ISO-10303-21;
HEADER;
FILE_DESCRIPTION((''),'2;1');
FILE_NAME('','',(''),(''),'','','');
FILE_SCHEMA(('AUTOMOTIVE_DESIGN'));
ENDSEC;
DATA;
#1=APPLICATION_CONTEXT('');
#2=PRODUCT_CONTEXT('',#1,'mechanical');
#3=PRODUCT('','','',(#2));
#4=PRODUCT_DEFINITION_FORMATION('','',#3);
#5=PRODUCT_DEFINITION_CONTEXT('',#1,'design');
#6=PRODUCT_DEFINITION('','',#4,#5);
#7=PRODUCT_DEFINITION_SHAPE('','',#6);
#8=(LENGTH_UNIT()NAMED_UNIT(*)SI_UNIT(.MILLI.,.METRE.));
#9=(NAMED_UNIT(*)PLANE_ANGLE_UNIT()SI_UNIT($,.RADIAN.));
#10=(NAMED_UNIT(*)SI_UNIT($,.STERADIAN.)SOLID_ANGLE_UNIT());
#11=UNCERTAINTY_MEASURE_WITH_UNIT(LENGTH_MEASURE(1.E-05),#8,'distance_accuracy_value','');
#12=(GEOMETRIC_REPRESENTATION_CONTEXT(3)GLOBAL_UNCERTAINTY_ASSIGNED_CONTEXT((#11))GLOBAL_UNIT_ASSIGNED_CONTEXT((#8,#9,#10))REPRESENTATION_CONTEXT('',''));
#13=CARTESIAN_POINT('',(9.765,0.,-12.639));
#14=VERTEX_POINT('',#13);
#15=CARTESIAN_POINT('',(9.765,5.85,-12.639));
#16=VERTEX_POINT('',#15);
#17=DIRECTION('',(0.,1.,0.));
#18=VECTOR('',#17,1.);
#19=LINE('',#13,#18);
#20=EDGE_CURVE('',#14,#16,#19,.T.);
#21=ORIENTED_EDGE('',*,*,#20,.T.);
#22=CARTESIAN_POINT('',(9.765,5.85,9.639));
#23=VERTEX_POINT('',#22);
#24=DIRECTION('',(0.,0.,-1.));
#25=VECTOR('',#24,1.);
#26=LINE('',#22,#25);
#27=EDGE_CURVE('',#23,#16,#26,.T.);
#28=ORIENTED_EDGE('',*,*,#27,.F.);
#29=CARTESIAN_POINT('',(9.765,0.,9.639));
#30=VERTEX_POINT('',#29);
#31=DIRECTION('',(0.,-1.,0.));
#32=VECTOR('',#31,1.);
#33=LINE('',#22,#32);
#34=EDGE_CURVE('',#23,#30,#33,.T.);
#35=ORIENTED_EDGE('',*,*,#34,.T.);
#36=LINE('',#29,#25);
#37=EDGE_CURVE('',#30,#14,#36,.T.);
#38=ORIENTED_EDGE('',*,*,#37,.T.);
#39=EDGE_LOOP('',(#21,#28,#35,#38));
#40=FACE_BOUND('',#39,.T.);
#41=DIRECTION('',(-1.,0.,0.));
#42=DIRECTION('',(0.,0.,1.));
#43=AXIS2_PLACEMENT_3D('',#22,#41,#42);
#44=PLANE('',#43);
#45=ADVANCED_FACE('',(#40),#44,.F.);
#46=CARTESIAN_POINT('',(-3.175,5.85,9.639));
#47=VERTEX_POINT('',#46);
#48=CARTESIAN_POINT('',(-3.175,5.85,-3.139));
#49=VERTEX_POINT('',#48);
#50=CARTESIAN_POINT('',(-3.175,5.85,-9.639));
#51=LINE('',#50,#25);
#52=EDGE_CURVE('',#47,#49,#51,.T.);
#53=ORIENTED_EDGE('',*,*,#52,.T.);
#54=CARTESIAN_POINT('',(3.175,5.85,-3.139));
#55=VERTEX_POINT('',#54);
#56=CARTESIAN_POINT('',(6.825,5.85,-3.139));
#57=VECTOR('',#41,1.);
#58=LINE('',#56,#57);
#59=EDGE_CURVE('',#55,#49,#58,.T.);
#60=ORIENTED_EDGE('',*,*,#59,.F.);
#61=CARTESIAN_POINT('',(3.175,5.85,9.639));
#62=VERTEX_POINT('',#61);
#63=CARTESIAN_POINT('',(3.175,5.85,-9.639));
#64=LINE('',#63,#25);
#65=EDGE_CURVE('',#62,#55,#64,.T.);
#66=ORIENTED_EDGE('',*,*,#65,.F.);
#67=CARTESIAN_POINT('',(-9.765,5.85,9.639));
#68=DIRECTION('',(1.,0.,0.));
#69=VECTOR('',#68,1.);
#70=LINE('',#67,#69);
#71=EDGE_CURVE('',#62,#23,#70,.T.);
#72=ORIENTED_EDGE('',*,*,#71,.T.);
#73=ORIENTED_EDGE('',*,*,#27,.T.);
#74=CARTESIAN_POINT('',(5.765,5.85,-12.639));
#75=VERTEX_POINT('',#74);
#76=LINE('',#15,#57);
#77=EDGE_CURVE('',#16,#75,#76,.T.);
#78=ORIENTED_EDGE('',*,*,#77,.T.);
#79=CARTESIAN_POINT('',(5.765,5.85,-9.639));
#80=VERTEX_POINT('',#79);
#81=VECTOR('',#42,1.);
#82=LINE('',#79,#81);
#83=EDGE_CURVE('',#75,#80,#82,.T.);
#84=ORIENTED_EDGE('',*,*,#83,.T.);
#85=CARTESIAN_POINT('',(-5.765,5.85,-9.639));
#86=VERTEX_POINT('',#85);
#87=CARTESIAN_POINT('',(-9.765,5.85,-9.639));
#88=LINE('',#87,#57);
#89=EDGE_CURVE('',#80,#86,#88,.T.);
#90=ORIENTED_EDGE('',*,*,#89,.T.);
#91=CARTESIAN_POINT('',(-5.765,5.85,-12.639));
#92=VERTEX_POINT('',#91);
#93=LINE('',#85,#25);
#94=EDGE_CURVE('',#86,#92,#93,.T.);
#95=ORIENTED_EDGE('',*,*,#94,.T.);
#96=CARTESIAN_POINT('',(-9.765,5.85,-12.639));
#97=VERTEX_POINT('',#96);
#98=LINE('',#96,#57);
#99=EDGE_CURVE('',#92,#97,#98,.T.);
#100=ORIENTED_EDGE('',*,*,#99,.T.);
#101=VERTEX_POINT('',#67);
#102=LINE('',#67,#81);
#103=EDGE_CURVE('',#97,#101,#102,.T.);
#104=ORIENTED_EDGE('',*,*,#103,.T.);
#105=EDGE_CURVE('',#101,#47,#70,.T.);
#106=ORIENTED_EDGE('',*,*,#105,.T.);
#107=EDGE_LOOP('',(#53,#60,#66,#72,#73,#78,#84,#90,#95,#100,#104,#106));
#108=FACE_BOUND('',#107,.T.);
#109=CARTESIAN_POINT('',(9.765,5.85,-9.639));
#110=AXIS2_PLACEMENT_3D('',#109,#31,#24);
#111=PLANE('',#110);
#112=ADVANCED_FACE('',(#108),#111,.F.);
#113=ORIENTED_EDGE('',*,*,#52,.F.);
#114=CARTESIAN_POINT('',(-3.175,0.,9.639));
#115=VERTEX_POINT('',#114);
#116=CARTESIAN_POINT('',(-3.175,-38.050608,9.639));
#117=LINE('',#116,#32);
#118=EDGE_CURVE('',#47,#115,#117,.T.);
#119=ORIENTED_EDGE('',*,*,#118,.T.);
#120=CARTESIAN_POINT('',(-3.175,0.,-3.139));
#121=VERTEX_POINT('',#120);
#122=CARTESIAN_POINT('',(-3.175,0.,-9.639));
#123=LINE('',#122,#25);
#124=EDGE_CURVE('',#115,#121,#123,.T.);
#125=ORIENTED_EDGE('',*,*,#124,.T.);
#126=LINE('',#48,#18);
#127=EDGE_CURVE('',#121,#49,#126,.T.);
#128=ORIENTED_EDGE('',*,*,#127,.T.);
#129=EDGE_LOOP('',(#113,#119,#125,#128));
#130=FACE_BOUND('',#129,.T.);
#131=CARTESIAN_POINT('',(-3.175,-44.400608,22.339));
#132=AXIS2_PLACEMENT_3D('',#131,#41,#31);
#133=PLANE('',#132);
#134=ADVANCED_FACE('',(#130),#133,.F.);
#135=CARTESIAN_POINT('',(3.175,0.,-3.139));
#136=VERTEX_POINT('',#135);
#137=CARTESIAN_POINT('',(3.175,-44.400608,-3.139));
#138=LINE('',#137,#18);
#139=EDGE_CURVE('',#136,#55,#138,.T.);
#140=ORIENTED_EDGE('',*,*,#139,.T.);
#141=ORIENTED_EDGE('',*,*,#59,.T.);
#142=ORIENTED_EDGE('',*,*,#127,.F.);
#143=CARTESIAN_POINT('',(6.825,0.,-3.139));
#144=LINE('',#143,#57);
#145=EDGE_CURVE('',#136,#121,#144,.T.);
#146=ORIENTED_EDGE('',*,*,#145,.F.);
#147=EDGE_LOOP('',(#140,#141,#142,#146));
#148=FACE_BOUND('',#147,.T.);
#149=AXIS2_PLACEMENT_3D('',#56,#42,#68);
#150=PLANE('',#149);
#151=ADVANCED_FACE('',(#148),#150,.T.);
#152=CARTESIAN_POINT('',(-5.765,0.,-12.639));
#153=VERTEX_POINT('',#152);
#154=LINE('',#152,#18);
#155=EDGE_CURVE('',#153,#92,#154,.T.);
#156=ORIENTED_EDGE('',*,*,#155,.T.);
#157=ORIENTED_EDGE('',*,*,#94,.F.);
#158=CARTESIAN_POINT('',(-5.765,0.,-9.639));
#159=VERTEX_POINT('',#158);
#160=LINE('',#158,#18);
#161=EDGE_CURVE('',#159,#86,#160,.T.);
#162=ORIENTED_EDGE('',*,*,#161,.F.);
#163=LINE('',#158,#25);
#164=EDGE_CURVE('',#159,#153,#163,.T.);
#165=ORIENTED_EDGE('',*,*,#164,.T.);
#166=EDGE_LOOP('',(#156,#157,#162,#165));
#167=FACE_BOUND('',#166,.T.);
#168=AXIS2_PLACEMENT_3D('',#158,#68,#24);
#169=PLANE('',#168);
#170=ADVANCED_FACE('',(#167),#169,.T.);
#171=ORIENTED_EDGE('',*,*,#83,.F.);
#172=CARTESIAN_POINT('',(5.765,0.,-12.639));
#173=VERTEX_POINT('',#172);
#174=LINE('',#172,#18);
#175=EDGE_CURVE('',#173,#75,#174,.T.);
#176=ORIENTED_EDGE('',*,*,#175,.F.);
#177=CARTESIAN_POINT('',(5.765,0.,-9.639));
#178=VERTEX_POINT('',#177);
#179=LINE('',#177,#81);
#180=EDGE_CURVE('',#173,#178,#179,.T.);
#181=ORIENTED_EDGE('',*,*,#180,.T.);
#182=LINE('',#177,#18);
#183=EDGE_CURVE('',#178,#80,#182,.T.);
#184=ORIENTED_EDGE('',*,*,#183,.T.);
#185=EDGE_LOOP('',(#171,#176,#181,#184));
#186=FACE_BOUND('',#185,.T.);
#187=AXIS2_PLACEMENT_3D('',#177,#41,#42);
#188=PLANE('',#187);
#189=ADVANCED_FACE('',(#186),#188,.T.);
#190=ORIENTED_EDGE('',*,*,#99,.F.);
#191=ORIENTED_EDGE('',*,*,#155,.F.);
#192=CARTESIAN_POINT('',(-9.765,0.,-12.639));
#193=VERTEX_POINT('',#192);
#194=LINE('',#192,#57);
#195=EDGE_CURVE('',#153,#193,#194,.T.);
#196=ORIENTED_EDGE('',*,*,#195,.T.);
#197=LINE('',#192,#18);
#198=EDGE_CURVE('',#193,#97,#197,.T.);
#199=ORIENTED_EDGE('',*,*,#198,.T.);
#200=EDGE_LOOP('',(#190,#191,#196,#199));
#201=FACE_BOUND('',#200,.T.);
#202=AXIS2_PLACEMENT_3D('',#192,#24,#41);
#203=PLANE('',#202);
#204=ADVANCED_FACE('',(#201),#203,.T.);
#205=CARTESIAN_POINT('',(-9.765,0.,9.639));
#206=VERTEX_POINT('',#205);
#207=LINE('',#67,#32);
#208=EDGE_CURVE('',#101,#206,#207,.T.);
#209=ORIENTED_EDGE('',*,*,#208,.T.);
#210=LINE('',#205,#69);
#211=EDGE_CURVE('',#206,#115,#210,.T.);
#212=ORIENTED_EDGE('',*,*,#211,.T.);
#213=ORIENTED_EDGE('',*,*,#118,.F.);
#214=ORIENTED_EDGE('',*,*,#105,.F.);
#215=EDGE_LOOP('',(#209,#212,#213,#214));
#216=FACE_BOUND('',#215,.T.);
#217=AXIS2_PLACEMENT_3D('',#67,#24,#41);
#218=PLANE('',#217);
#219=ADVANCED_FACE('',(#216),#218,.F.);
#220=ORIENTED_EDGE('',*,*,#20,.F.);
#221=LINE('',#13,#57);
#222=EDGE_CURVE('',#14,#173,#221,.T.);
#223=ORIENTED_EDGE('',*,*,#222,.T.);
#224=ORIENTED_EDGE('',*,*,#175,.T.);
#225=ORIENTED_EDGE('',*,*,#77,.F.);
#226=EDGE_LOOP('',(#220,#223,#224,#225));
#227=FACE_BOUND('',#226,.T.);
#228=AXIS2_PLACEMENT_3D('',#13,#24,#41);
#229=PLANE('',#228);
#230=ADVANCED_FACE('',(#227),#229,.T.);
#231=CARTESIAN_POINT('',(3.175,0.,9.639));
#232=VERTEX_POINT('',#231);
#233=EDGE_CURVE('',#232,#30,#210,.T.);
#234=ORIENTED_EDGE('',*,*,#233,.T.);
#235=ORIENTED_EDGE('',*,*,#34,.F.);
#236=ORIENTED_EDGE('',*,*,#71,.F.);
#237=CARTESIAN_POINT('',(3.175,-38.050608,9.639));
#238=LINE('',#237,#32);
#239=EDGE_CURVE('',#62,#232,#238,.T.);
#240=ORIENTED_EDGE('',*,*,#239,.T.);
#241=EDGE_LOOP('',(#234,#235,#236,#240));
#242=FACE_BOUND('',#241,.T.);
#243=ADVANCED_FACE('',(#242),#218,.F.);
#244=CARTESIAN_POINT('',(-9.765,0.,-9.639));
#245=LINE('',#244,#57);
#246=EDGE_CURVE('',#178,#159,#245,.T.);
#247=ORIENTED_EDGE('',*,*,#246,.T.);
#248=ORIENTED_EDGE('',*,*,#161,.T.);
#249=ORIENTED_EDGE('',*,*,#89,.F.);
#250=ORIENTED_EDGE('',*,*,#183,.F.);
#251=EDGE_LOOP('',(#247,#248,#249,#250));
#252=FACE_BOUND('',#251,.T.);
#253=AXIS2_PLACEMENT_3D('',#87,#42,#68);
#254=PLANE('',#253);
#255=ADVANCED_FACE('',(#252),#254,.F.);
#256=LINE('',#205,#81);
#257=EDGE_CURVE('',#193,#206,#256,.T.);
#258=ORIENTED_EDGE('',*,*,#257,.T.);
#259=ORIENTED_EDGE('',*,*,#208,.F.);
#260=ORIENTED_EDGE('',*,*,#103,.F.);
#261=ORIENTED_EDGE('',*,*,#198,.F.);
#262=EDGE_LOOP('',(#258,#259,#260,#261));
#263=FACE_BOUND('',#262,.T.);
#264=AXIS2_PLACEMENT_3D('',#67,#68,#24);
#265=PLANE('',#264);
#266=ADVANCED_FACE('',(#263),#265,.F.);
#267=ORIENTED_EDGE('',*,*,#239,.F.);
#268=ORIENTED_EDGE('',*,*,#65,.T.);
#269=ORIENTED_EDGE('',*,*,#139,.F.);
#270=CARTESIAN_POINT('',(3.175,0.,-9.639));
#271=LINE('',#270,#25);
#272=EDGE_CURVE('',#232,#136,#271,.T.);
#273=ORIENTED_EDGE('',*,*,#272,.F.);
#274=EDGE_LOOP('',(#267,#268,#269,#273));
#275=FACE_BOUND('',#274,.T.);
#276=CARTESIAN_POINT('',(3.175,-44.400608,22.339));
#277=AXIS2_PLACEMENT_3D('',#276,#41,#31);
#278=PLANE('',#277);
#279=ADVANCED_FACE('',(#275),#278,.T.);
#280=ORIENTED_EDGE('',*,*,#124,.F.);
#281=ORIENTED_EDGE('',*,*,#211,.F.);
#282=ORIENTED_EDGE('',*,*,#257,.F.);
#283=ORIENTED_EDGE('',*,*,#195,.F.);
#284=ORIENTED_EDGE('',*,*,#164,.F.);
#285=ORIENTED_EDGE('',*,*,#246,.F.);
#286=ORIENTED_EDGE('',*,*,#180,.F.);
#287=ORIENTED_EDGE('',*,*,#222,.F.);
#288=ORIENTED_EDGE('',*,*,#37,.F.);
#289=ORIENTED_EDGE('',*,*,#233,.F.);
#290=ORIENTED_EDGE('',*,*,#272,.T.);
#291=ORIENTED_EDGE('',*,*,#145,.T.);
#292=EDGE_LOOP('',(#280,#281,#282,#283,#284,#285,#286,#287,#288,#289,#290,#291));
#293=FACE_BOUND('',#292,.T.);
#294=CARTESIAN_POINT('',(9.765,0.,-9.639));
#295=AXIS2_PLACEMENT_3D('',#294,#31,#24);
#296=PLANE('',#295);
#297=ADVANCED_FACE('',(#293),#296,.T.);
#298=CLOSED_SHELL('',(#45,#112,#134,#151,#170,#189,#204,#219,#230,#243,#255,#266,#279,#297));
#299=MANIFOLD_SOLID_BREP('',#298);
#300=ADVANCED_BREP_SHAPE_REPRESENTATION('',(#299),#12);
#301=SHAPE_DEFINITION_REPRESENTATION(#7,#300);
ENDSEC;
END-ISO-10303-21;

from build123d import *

# Parameters (mm, degrees)
SKETCH1_W           = 19.53
SKETCH1_H           = 19.278
BOSS_EXTRUDE1_DEPTH = 5.85
SKETCH2_W           = 4
SKETCH2_H           = 3
BOSS_EXTRUDE2_DEPTH = 5.85
CAVITY1_START       = -3.175
CAVITY1_OUTLINE_W   = 5.85
CAVITY1_OUTLINE_H   = 12.778
CAVITY1_DEPTH       = 6.35


# Read off the part's stored shape, not the designer's step: Cavity1
with BuildPart() as part:
    # Sketch1 → Boss-Extrude1 (new body)
    with BuildSketch(Plane(origin=(0, 0, 0), x_dir=(1, 0, 0), z_dir=(0, 1, 0))):
        Rectangle(SKETCH1_W, SKETCH1_H)
    extrude(amount=BOSS_EXTRUDE1_DEPTH)

    # Sketch2 → Boss-Extrude2 (add)
    with BuildSketch(Plane(origin=(0, 5.85, 0), x_dir=(1, 0, 0), z_dir=(0, 1, 0))):
        with Locations((-7.765, 11.139)):
            Rectangle(SKETCH2_W, SKETCH2_H)
        with Locations((7.765, 11.139)):
            Rectangle(SKETCH2_W, SKETCH2_H)
    extrude(amount=-BOSS_EXTRUDE2_DEPTH)

    # Cavity1 outline → Cavity1 (cut)
    with BuildSketch(Plane.YZ.offset(CAVITY1_START)):
        with Locations((2.925, 3.25)):
            Rectangle(CAVITY1_OUTLINE_W, CAVITY1_OUTLINE_H)
    extrude(amount=CAVITY1_DEPTH, mode=Mode.SUBTRACT)


solid = part.part
